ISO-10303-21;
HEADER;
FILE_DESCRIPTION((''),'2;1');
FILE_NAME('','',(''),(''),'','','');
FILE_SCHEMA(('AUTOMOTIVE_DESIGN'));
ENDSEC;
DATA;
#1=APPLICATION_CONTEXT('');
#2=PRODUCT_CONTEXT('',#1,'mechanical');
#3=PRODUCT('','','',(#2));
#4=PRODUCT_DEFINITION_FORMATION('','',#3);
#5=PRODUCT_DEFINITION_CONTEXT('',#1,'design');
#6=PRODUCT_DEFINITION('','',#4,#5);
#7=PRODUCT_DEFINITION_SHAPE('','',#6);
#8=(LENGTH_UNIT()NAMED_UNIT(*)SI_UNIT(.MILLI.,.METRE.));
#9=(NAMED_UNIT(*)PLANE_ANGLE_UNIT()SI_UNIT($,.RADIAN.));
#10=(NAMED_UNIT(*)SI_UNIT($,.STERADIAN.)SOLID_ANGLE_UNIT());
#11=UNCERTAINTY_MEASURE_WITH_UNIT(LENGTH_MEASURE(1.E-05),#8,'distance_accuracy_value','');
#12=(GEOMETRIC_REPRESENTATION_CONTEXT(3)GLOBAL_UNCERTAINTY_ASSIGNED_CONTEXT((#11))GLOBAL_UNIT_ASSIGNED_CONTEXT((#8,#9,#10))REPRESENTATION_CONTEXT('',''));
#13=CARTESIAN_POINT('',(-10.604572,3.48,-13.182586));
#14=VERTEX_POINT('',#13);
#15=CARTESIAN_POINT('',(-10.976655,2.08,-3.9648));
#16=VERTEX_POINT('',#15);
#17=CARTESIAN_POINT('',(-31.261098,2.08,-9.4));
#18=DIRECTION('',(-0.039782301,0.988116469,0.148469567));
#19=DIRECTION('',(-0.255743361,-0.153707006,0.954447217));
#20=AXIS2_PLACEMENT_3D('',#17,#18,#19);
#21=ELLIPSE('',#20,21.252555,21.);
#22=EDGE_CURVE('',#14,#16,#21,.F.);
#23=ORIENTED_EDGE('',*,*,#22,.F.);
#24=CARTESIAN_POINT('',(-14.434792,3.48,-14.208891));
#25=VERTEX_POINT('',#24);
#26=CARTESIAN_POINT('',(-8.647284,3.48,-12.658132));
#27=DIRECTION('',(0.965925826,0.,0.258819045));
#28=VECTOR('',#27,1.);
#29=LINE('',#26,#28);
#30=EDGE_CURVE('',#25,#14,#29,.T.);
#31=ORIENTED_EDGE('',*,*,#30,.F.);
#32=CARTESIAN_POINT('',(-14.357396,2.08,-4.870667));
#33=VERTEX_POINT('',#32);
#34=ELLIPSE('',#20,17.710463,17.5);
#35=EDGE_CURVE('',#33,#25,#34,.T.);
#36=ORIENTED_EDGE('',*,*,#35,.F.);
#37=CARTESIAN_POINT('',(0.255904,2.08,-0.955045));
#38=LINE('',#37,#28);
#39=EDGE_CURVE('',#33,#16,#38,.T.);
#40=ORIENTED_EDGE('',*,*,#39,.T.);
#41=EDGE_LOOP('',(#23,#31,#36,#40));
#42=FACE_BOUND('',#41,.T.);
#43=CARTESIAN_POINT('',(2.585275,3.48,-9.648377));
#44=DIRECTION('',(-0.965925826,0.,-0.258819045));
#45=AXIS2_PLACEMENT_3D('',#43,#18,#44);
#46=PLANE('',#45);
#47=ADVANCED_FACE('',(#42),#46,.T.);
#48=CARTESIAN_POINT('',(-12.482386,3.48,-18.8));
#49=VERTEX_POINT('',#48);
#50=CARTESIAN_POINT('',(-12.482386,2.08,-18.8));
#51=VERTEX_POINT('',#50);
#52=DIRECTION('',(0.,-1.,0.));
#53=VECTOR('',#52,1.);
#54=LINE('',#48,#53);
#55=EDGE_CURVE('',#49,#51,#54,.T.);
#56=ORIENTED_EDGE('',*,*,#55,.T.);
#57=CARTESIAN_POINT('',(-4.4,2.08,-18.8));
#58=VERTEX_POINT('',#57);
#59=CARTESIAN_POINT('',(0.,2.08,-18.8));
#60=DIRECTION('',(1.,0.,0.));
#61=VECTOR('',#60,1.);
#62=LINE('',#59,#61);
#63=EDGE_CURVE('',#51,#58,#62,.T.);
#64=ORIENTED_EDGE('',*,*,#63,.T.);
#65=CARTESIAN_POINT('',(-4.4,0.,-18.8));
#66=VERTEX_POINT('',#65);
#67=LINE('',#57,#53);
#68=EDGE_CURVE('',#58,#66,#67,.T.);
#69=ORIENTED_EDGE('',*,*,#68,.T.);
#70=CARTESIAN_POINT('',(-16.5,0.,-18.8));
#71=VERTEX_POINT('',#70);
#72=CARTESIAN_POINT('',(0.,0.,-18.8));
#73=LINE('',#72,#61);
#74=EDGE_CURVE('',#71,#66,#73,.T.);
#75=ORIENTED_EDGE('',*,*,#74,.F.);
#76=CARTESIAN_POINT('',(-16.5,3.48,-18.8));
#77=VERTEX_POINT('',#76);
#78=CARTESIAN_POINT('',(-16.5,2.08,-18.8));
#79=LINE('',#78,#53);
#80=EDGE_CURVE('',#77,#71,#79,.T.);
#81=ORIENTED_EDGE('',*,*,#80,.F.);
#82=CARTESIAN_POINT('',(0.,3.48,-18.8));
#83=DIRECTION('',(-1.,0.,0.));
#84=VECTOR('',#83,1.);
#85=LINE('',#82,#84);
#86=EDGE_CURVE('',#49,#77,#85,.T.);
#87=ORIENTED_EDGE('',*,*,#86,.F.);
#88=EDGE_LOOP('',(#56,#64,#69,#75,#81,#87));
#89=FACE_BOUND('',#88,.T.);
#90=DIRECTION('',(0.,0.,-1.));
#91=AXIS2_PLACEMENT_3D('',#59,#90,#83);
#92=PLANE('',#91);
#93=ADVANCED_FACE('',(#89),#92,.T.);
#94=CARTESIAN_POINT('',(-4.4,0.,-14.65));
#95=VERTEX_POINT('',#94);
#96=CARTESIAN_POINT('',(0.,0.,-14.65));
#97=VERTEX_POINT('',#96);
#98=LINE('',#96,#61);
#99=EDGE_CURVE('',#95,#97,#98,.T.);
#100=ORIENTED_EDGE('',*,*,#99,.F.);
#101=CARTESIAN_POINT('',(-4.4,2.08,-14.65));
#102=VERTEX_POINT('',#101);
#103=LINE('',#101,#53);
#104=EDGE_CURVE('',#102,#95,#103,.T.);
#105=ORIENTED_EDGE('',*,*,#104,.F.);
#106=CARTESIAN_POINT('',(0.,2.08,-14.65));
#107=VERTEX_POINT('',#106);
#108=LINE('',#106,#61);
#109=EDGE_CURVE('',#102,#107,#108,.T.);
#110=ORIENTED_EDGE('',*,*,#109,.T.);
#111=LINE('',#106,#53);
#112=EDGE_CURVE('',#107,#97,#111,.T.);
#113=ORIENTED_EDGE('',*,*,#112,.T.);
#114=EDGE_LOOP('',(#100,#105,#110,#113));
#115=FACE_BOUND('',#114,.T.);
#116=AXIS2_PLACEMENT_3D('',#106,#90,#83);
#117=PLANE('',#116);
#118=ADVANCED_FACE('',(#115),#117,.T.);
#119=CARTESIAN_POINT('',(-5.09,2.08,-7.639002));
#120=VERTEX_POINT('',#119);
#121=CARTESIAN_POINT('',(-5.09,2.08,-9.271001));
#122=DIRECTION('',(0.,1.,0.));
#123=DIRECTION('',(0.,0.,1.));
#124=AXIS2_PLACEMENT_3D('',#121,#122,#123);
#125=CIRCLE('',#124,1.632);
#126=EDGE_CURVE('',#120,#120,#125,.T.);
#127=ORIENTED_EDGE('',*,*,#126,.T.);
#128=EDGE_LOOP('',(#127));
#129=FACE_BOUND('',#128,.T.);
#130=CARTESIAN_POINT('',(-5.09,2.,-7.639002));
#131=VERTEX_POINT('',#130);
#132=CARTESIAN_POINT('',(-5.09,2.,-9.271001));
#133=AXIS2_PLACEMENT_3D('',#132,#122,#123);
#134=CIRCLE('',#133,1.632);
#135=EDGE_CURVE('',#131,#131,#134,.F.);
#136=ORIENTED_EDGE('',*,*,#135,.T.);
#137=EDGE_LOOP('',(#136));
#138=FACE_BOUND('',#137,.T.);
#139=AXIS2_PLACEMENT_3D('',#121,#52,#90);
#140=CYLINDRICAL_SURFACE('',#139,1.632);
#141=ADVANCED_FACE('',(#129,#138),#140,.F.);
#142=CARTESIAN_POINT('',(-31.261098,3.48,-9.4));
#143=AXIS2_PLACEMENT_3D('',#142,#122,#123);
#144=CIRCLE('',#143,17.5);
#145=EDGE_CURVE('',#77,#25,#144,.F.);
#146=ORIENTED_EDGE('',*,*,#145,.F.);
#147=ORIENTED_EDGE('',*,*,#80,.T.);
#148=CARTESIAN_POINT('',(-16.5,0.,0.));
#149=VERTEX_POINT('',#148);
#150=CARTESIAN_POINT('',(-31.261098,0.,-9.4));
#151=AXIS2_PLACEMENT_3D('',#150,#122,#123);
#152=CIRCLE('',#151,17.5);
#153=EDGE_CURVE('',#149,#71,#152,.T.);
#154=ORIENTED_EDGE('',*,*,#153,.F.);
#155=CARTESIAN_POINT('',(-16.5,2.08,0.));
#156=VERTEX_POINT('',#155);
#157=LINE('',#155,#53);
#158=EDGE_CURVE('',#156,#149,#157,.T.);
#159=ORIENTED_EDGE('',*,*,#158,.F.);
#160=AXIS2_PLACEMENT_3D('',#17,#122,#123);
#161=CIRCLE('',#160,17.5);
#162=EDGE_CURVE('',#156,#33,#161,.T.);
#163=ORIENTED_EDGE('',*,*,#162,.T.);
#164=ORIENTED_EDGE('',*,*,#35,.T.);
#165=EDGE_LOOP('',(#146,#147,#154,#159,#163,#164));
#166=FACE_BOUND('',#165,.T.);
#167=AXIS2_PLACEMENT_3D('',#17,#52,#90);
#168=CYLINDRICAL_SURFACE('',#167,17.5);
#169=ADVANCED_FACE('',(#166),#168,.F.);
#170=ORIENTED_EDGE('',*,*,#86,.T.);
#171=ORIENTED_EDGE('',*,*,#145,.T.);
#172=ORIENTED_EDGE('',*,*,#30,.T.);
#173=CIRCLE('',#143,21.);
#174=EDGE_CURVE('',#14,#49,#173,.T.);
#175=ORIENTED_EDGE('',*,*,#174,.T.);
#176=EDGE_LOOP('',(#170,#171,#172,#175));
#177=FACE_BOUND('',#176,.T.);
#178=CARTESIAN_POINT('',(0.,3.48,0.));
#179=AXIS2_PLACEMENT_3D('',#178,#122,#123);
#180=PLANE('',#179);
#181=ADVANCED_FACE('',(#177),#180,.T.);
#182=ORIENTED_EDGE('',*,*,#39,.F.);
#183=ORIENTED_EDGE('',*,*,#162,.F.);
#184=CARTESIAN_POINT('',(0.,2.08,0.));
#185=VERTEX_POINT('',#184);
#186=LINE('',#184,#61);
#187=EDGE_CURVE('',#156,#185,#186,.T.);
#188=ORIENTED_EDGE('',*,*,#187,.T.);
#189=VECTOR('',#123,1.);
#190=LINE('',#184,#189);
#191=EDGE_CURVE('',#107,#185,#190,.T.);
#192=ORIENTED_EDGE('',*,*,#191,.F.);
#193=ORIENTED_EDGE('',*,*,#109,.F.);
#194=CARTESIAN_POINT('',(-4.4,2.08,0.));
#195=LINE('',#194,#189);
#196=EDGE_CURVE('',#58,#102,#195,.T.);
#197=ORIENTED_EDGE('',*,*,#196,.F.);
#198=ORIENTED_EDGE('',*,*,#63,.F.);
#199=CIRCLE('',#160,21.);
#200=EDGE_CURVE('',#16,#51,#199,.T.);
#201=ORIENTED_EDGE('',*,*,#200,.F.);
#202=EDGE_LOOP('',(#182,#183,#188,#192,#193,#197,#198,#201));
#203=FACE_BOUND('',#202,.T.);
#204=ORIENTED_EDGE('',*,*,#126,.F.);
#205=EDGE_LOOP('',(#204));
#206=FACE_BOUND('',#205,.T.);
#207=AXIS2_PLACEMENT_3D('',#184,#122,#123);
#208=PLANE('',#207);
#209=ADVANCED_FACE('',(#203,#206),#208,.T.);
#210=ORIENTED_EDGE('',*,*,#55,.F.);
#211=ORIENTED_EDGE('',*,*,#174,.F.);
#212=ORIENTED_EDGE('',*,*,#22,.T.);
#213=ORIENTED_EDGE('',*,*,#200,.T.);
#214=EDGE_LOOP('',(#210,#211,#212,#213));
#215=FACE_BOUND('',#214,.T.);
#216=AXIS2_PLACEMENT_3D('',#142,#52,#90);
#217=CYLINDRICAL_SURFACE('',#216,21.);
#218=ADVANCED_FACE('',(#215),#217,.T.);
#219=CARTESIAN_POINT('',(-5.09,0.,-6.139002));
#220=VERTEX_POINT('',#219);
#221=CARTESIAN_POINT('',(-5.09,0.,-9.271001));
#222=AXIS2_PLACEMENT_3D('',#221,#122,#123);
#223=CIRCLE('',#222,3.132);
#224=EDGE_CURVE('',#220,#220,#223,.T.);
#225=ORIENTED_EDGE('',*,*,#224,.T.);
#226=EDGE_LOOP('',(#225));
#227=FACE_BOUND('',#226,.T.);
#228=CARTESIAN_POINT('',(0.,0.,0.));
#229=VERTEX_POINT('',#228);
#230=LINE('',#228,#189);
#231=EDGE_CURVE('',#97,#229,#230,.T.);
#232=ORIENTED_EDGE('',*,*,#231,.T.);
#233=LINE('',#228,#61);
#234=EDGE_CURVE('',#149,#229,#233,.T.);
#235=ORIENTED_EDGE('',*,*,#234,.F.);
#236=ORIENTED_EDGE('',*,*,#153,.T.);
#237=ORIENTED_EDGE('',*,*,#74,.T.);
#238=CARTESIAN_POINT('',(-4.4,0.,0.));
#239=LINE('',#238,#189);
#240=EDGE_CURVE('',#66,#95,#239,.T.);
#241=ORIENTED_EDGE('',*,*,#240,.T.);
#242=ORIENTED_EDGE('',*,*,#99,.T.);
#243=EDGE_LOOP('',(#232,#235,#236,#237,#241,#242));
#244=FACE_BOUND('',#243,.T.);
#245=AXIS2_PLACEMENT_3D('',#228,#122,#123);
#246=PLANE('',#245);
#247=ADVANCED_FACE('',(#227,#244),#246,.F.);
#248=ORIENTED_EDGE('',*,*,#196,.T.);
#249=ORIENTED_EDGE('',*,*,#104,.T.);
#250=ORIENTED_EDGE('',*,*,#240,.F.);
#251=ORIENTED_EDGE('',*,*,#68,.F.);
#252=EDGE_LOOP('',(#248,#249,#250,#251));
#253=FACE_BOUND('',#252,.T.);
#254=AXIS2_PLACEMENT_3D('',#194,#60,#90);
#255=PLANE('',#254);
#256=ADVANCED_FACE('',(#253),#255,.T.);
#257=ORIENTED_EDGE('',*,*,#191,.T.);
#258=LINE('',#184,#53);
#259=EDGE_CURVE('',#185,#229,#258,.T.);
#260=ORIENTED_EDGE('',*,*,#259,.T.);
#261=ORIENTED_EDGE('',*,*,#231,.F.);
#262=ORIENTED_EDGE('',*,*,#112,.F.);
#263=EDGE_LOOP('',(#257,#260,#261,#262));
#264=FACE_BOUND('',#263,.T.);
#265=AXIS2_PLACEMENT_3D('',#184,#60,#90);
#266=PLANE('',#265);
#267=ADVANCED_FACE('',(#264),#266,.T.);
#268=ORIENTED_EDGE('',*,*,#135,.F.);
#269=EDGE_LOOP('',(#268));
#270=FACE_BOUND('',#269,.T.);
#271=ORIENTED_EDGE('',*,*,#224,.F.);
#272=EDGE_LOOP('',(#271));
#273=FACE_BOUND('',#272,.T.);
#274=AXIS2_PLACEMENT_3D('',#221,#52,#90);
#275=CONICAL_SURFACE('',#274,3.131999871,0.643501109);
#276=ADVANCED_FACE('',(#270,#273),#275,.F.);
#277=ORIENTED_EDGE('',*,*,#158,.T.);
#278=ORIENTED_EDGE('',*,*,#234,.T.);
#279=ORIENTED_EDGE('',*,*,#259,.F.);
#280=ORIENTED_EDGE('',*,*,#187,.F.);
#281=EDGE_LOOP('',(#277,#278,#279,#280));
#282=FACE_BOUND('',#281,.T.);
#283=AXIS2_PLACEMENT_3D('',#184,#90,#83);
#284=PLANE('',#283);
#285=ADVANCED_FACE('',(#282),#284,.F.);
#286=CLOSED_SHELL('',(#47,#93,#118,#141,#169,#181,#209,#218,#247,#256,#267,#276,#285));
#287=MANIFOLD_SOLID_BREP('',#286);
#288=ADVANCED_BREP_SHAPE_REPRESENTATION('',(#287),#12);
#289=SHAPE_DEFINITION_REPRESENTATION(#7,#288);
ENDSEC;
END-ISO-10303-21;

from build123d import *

# Parameters (mm, degrees)
SKETCH1_R           = 1.631999871
BOSS_EXTRUDE1_DEPTH = 2.08
BOSS_EXTRUDE2_DEPTH = 1.4
CHAMFER1_SIZE       = 9
CHAMFER1_SIZE_2     = 1.4
CHAMFER2_SIZE       = 2
CHAMFER2_SIZE2      = 1.5


with BuildPart() as part:
    # Sketch1 → Boss-Extrude1 (new body)
    with BuildSketch(Plane(origin=(0, 0, 0), x_dir=(1, 0, 0), z_dir=(0, 1, 0))):
        with BuildLine():
            Line((-4.4, 14.65), (-4.4, 18.8))
            Line((-4.4, 18.8), (-16.5, 18.8))
            ThreePointArc((-16.5, 18.8), (-13.76109752, 9.4), (-16.5, 0))
            Line((-16.5, 0), (0, 0))
            Line((0, 0), (0, 14.65))
            Line((0, 14.65), (-4.4, 14.65))
        make_face()
        with Locations(Location((-5.09, 9.271001493, 0), (0, 0, 270))):
            Circle(SKETCH1_R, mode=Mode.SUBTRACT)
    extrude(amount=BOSS_EXTRUDE1_DEPTH)

    # Sketch2 → Boss-Extrude2 (add)
    with BuildSketch(Plane(origin=(0, 2.08, 0), x_dir=(1, 0, 0), z_dir=(0, 1, 0))):
        with BuildLine():
            Line((-12.482386169, 18.8), (-16.5, 18.8))
            ThreePointArc((-16.5, 18.8), (-13.964523784, 12.06055201), (-14.35739556, 4.870666711))
            Line((-14.35739556, 4.870666711), (-10.976655168, 3.964800053))
            ThreePointArc((-10.976655168, 3.964800053), (-10.36843652, 11.520546233), (-12.482386169, 18.8))
        make_face()
    extrude(amount=BOSS_EXTRUDE2_DEPTH)

    # Chamfer1
    # the kernel refuses this chamfer: 9, 1.4 mm, written as the material it takes off along each edge
    with BuildSketch(Plane(origin=(-36.950124299, 3.48, -10.924370131), x_dir=(0.25881451828946306, 0.005914407767472668, -0.9659089319927389), z_dir=(0.9659258262890682, 0, 0.2588190451025212))) as chamfer1_piece_1_section:
        Polygon((CHAMFER1_SIZE * 0.999982509737, -CHAMFER1_SIZE * 0.00591440776747), (-CHAMFER1_SIZE_2 * 0.00591440776747, -CHAMFER1_SIZE_2 * 0.999982509737), (0, 0), align=None)
    chamfer1_piece_1 = extrude(amount=50.279427829, mode=Mode.PRIVATE)
    chamfer1_piece_1 = split(chamfer1_piece_1, bisect_by=Plane(origin=(-11.82064593, 2.08, -7.576464434), z_dir=(0, 1, 0)), keep=Keep.TOP, mode=Mode.PRIVATE)
    add(chamfer1_piece_1, mode=Mode.SUBTRACT)

    # Chamfer2
    chamfer2_edges = [part.edges().sort_by_distance(p)[0] for p in [
        (-5.09, 0, -10.903001364),
    ]]
    chamfer2_side = [part.faces().sort_by_distance(p)[0] for p in [
        (-5.09, 1.04, -10.903001364),
    ]]
    chamfer(chamfer2_edges, length=CHAMFER2_SIZE, length2=CHAMFER2_SIZE2, reference=chamfer2_side[0])


solid = part.part
